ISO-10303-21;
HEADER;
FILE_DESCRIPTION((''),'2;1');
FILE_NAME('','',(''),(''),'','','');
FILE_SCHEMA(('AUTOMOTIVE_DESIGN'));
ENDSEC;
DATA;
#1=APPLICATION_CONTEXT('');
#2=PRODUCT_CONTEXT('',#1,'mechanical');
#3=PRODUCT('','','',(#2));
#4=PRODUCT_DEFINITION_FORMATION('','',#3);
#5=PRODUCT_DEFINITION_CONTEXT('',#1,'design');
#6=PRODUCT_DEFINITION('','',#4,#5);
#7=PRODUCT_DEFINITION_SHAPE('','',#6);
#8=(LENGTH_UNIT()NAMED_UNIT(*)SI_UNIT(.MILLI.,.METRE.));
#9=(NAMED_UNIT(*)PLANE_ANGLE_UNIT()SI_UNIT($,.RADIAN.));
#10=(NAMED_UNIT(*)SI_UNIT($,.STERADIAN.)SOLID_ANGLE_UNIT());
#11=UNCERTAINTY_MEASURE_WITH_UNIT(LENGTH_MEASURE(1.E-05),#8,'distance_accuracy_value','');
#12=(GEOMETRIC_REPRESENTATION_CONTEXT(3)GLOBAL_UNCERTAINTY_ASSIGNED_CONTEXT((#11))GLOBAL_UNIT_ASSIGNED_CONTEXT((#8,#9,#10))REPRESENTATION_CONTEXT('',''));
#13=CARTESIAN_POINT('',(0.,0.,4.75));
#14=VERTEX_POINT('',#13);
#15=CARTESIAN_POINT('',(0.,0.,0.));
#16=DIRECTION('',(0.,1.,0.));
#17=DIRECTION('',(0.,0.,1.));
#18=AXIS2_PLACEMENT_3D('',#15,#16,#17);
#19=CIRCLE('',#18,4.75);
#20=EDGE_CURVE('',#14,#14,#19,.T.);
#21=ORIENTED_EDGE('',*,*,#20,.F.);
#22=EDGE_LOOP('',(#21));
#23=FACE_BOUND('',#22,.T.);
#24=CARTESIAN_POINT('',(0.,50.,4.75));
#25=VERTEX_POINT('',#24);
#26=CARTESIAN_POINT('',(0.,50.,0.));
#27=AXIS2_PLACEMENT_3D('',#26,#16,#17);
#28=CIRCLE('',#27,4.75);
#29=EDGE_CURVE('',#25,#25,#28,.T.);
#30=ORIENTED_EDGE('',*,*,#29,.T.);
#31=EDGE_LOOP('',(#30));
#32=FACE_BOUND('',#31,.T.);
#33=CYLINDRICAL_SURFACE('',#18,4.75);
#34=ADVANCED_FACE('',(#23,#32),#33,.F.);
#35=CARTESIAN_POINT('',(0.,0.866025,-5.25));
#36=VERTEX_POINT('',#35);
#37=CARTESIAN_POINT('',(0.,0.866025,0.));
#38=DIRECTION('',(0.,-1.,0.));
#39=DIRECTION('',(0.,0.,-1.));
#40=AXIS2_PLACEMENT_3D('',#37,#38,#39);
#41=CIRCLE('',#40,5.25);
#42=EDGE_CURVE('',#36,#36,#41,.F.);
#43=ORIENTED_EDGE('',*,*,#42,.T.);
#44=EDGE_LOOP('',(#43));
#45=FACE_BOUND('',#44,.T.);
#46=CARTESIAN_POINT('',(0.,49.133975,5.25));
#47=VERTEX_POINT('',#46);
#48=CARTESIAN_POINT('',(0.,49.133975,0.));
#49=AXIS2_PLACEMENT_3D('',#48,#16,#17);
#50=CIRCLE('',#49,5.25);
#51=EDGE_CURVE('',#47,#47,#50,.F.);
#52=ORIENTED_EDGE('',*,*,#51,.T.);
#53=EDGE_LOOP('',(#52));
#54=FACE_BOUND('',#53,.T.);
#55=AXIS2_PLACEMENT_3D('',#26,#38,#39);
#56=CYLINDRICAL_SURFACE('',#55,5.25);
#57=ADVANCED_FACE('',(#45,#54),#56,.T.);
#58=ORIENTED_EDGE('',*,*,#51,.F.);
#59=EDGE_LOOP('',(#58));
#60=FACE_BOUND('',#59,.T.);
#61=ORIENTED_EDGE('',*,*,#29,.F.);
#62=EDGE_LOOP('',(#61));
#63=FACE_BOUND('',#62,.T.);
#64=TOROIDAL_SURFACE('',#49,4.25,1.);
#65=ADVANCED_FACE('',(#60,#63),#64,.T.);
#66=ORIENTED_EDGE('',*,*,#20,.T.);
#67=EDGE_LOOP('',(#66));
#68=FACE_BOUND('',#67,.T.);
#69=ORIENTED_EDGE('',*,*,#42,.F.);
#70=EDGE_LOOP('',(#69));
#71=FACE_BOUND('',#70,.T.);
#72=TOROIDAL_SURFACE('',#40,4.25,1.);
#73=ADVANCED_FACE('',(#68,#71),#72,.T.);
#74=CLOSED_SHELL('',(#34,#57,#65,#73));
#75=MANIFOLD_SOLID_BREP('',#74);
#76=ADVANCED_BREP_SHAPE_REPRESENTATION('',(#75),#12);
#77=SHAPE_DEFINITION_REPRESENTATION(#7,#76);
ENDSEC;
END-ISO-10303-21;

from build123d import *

# Parameters (mm, degrees)
SKETCH1_R           = 5.25
BOSS_EXTRUDE1_DEPTH = 50
SKETCH2_R           = 4.75
CUT_EXTRUDE1_DEPTH  = 50
FILLET1_R           = 1


with BuildPart() as part:
    # Sketch1 → Boss-Extrude1 (new body)
    with BuildSketch(Plane(origin=(0, 0, 0), x_dir=(1, 0, 0), z_dir=(0, 1, 0))):
        with Locations(Location((0, 0, 0), (0, 0, 270))):
            Circle(SKETCH1_R)
    extrude(amount=BOSS_EXTRUDE1_DEPTH)

    # Sketch2 → Cut-Extrude1 (cut)
    with BuildSketch(Plane(origin=(0, 50, 0), x_dir=(1, 0, 0), z_dir=(0, 1, 0))):
        with Locations(Location((0, 0, 0), (0, 0, 270))):
            Circle(SKETCH2_R)
    extrude(amount=-CUT_EXTRUDE1_DEPTH, mode=Mode.SUBTRACT)

    # Fillet1
    # the kernel refuses this fillet: 1 mm, written as the material it takes off along each edge
    with BuildSketch(Plane(origin=(0, 0, 0), x_dir=(0, 0, 1), z_dir=(-1, 0, 0))) as fillet1_piece_1:
        with BuildLine():
            CenterArc((4.25, 0.866025404), FILLET1_R, 300, 60)
            Line((4.75, 0), (4.76, -0.017320508))
            ThreePointArc((4.76, -0.017320508), (5, -0.02), (5.25, -0.02))
            Line((5.25, -0.02), (5.27, 0))
            Line((5.27, 0), (5.27, 0.866025404))
            Line((5.27, 0.866025404), (5.25, 0.866025404))
        make_face()
    revolve(axis=Axis((0, 0, 0), (0, 1, 0)), mode=Mode.SUBTRACT)
    with BuildSketch(Plane(origin=(0, 50, 0), x_dir=(0, 0, 1), z_dir=(-1, 0, 0))) as fillet1_piece_2:
        with BuildLine():
            CenterArc((4.25, -0.866025404), FILLET1_R, 0, 60)
            Line((4.75, 0), (4.76, 0.017320508))
            ThreePointArc((4.76, 0.017320508), (5, 0.02), (5.25, 0.02))
            Line((5.25, 0.02), (5.27, 0))
            Line((5.27, 0), (5.27, -0.866025404))
            Line((5.27, -0.866025404), (5.25, -0.866025404))
        make_face()
    revolve(axis=Axis((0, 50, 0), (0, 1, 0)), mode=Mode.SUBTRACT)


solid = part.part
